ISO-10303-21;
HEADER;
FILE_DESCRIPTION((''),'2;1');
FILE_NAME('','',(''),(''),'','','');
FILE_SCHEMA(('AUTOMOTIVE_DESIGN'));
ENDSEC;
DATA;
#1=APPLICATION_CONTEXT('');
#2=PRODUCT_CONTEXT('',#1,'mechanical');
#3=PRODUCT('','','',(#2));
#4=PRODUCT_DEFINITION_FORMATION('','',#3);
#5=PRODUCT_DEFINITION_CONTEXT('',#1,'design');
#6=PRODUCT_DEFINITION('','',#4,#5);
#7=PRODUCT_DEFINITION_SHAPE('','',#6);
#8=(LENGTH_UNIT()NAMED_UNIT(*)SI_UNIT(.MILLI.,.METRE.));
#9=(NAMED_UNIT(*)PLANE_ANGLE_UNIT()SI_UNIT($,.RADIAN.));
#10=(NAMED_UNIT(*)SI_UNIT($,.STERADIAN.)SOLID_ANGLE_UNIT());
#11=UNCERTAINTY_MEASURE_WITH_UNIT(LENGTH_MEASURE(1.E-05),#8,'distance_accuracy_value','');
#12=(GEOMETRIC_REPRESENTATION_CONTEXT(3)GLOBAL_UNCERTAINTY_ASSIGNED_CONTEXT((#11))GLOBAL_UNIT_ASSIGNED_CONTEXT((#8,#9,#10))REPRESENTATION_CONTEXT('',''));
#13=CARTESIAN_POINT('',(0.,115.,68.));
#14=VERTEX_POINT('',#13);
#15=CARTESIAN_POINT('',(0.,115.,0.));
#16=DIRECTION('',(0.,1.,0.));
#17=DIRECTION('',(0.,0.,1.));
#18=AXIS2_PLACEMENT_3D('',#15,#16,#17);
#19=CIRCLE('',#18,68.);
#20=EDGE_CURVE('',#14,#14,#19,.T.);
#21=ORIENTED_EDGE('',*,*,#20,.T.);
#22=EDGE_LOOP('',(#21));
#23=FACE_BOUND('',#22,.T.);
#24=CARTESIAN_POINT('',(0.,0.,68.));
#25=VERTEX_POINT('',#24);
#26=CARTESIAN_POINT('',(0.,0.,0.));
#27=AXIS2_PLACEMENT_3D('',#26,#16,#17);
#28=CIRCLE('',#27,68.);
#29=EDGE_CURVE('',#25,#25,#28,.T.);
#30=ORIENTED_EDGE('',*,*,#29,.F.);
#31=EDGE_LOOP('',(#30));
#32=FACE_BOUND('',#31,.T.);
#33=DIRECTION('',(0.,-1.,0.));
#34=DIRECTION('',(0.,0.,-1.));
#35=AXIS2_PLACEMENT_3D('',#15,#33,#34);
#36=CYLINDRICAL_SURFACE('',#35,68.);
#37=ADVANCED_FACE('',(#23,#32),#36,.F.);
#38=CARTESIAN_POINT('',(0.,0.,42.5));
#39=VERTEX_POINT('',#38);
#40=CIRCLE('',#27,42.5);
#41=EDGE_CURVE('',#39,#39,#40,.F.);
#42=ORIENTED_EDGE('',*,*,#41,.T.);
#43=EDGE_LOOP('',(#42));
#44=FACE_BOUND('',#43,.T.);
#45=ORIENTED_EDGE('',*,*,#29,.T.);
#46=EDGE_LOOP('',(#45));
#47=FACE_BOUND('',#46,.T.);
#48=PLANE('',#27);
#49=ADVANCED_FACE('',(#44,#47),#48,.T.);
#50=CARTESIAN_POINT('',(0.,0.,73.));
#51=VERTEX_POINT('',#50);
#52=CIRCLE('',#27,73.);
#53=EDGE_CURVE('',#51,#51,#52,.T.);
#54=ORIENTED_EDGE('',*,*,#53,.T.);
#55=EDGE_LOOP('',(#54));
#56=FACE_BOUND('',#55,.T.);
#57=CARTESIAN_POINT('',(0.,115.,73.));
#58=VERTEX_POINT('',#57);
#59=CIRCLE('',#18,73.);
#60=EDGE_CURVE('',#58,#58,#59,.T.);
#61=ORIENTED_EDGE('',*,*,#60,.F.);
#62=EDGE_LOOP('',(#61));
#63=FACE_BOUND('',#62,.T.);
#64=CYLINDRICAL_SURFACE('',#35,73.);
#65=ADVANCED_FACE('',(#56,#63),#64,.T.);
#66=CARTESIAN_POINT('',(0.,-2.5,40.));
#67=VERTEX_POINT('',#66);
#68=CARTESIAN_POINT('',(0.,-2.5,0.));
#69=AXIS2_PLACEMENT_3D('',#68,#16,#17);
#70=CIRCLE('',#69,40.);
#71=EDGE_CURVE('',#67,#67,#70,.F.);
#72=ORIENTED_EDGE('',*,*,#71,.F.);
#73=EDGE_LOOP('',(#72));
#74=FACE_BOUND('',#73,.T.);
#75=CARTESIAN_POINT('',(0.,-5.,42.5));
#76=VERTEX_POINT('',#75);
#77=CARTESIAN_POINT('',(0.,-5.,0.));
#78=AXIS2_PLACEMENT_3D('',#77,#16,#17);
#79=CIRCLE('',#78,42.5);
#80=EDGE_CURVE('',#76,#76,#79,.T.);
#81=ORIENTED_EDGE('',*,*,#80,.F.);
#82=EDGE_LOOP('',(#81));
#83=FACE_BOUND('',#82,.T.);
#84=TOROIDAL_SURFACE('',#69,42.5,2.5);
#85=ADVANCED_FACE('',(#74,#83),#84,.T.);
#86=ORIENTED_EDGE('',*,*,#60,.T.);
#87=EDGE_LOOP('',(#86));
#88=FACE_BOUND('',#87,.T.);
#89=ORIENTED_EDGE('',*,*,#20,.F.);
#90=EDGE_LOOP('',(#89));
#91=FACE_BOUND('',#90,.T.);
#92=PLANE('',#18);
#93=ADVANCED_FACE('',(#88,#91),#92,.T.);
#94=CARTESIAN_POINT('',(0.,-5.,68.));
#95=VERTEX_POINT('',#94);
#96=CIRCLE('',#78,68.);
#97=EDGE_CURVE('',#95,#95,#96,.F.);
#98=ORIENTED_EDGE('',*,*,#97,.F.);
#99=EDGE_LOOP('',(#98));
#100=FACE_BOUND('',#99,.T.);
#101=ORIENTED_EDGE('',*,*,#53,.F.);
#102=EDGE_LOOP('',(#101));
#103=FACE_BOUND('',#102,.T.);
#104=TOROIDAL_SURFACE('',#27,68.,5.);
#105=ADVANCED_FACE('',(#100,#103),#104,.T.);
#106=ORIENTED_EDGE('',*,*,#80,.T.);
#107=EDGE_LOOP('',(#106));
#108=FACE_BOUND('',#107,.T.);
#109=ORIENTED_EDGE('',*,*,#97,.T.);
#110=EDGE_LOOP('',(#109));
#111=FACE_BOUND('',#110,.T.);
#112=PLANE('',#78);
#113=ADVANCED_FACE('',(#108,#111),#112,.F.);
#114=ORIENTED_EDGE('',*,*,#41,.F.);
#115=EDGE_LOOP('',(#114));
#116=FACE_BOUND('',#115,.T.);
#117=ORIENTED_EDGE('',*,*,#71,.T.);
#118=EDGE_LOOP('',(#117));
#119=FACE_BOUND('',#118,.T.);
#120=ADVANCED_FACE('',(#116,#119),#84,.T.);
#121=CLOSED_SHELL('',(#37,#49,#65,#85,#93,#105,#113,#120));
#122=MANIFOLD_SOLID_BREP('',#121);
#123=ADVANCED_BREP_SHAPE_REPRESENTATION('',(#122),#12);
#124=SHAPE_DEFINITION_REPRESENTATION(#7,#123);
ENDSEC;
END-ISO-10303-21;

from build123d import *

# Parameters (mm, degrees)
SKETCH1_R               = 68
BOSS_EXTRUDE1_DEPTH     = 115
SHELL1_T                = 5
FILLET1_R               = 5
CUT_EXTRUDE1_DEPTH      = 159.297188857
CUT_EXTRUDE1_DEPTH_BACK = 159.297188857
SKETCH2_R               = 40
FILLET3_R               = 2.5


# Some blends are built 0.0001 mm under size
with BuildPart() as part:
    # Sketch1 → Boss-Extrude1 (new body)
    with BuildSketch(Plane(origin=(0, 0, 0), x_dir=(1, 0, 0), z_dir=(0, 1, 0))):
        with Locations(Location((0, 0, 0), (0, 0, 270))):
            Circle(SKETCH1_R)
    extrude(amount=BOSS_EXTRUDE1_DEPTH)

    # Shell1
    shell1_openings = [part.faces().sort_by_distance(p)[0] for p in [
        (0, 115, 0),
    ]]
    offset(amount=SHELL1_T, openings=shell1_openings, kind=Kind.INTERSECTION)

    # Fillet1
    # the kernel refuses this fillet: 5 mm, written as the material it takes off along each edge
    with BuildSketch(Plane(origin=(0, -5, 0), x_dir=(0, 0, 1), z_dir=(1, 0, 0))) as fillet1_piece_1:
        with BuildLine():
            CenterArc((73 - FILLET1_R, -FILLET1_R), FILLET1_R, 0, 90)
            Line((73 - FILLET1_R, 0), (73, 0))
            Line((73, 0), (73, -FILLET1_R))
        make_face()
    revolve(axis=Axis((0, -5, 0), (0, -1, 0)), mode=Mode.SUBTRACT)

    # Sketch2 → Cut-Extrude1 (cut, two sides: drawn at the far end of the back side and taken through both)
    with BuildSketch(Plane.XZ.offset(5).offset(-CUT_EXTRUDE1_DEPTH_BACK)):
        with Locations(Location((0, 0, 0), (0, 0, 270))):
            Circle(SKETCH2_R)
    extrude(amount=CUT_EXTRUDE1_DEPTH + CUT_EXTRUDE1_DEPTH_BACK, mode=Mode.SUBTRACT)

    # Fillet3
    fillet3_edges = [part.edges().sort_by_distance(p)[0] for p in [
        (0, -5, 40),
        (0, 0, 40),
    ]]
    fillet(fillet3_edges, radius=FILLET3_R - 0.0001)  # a hair under: the kernel refuses the full size


solid = part.part
